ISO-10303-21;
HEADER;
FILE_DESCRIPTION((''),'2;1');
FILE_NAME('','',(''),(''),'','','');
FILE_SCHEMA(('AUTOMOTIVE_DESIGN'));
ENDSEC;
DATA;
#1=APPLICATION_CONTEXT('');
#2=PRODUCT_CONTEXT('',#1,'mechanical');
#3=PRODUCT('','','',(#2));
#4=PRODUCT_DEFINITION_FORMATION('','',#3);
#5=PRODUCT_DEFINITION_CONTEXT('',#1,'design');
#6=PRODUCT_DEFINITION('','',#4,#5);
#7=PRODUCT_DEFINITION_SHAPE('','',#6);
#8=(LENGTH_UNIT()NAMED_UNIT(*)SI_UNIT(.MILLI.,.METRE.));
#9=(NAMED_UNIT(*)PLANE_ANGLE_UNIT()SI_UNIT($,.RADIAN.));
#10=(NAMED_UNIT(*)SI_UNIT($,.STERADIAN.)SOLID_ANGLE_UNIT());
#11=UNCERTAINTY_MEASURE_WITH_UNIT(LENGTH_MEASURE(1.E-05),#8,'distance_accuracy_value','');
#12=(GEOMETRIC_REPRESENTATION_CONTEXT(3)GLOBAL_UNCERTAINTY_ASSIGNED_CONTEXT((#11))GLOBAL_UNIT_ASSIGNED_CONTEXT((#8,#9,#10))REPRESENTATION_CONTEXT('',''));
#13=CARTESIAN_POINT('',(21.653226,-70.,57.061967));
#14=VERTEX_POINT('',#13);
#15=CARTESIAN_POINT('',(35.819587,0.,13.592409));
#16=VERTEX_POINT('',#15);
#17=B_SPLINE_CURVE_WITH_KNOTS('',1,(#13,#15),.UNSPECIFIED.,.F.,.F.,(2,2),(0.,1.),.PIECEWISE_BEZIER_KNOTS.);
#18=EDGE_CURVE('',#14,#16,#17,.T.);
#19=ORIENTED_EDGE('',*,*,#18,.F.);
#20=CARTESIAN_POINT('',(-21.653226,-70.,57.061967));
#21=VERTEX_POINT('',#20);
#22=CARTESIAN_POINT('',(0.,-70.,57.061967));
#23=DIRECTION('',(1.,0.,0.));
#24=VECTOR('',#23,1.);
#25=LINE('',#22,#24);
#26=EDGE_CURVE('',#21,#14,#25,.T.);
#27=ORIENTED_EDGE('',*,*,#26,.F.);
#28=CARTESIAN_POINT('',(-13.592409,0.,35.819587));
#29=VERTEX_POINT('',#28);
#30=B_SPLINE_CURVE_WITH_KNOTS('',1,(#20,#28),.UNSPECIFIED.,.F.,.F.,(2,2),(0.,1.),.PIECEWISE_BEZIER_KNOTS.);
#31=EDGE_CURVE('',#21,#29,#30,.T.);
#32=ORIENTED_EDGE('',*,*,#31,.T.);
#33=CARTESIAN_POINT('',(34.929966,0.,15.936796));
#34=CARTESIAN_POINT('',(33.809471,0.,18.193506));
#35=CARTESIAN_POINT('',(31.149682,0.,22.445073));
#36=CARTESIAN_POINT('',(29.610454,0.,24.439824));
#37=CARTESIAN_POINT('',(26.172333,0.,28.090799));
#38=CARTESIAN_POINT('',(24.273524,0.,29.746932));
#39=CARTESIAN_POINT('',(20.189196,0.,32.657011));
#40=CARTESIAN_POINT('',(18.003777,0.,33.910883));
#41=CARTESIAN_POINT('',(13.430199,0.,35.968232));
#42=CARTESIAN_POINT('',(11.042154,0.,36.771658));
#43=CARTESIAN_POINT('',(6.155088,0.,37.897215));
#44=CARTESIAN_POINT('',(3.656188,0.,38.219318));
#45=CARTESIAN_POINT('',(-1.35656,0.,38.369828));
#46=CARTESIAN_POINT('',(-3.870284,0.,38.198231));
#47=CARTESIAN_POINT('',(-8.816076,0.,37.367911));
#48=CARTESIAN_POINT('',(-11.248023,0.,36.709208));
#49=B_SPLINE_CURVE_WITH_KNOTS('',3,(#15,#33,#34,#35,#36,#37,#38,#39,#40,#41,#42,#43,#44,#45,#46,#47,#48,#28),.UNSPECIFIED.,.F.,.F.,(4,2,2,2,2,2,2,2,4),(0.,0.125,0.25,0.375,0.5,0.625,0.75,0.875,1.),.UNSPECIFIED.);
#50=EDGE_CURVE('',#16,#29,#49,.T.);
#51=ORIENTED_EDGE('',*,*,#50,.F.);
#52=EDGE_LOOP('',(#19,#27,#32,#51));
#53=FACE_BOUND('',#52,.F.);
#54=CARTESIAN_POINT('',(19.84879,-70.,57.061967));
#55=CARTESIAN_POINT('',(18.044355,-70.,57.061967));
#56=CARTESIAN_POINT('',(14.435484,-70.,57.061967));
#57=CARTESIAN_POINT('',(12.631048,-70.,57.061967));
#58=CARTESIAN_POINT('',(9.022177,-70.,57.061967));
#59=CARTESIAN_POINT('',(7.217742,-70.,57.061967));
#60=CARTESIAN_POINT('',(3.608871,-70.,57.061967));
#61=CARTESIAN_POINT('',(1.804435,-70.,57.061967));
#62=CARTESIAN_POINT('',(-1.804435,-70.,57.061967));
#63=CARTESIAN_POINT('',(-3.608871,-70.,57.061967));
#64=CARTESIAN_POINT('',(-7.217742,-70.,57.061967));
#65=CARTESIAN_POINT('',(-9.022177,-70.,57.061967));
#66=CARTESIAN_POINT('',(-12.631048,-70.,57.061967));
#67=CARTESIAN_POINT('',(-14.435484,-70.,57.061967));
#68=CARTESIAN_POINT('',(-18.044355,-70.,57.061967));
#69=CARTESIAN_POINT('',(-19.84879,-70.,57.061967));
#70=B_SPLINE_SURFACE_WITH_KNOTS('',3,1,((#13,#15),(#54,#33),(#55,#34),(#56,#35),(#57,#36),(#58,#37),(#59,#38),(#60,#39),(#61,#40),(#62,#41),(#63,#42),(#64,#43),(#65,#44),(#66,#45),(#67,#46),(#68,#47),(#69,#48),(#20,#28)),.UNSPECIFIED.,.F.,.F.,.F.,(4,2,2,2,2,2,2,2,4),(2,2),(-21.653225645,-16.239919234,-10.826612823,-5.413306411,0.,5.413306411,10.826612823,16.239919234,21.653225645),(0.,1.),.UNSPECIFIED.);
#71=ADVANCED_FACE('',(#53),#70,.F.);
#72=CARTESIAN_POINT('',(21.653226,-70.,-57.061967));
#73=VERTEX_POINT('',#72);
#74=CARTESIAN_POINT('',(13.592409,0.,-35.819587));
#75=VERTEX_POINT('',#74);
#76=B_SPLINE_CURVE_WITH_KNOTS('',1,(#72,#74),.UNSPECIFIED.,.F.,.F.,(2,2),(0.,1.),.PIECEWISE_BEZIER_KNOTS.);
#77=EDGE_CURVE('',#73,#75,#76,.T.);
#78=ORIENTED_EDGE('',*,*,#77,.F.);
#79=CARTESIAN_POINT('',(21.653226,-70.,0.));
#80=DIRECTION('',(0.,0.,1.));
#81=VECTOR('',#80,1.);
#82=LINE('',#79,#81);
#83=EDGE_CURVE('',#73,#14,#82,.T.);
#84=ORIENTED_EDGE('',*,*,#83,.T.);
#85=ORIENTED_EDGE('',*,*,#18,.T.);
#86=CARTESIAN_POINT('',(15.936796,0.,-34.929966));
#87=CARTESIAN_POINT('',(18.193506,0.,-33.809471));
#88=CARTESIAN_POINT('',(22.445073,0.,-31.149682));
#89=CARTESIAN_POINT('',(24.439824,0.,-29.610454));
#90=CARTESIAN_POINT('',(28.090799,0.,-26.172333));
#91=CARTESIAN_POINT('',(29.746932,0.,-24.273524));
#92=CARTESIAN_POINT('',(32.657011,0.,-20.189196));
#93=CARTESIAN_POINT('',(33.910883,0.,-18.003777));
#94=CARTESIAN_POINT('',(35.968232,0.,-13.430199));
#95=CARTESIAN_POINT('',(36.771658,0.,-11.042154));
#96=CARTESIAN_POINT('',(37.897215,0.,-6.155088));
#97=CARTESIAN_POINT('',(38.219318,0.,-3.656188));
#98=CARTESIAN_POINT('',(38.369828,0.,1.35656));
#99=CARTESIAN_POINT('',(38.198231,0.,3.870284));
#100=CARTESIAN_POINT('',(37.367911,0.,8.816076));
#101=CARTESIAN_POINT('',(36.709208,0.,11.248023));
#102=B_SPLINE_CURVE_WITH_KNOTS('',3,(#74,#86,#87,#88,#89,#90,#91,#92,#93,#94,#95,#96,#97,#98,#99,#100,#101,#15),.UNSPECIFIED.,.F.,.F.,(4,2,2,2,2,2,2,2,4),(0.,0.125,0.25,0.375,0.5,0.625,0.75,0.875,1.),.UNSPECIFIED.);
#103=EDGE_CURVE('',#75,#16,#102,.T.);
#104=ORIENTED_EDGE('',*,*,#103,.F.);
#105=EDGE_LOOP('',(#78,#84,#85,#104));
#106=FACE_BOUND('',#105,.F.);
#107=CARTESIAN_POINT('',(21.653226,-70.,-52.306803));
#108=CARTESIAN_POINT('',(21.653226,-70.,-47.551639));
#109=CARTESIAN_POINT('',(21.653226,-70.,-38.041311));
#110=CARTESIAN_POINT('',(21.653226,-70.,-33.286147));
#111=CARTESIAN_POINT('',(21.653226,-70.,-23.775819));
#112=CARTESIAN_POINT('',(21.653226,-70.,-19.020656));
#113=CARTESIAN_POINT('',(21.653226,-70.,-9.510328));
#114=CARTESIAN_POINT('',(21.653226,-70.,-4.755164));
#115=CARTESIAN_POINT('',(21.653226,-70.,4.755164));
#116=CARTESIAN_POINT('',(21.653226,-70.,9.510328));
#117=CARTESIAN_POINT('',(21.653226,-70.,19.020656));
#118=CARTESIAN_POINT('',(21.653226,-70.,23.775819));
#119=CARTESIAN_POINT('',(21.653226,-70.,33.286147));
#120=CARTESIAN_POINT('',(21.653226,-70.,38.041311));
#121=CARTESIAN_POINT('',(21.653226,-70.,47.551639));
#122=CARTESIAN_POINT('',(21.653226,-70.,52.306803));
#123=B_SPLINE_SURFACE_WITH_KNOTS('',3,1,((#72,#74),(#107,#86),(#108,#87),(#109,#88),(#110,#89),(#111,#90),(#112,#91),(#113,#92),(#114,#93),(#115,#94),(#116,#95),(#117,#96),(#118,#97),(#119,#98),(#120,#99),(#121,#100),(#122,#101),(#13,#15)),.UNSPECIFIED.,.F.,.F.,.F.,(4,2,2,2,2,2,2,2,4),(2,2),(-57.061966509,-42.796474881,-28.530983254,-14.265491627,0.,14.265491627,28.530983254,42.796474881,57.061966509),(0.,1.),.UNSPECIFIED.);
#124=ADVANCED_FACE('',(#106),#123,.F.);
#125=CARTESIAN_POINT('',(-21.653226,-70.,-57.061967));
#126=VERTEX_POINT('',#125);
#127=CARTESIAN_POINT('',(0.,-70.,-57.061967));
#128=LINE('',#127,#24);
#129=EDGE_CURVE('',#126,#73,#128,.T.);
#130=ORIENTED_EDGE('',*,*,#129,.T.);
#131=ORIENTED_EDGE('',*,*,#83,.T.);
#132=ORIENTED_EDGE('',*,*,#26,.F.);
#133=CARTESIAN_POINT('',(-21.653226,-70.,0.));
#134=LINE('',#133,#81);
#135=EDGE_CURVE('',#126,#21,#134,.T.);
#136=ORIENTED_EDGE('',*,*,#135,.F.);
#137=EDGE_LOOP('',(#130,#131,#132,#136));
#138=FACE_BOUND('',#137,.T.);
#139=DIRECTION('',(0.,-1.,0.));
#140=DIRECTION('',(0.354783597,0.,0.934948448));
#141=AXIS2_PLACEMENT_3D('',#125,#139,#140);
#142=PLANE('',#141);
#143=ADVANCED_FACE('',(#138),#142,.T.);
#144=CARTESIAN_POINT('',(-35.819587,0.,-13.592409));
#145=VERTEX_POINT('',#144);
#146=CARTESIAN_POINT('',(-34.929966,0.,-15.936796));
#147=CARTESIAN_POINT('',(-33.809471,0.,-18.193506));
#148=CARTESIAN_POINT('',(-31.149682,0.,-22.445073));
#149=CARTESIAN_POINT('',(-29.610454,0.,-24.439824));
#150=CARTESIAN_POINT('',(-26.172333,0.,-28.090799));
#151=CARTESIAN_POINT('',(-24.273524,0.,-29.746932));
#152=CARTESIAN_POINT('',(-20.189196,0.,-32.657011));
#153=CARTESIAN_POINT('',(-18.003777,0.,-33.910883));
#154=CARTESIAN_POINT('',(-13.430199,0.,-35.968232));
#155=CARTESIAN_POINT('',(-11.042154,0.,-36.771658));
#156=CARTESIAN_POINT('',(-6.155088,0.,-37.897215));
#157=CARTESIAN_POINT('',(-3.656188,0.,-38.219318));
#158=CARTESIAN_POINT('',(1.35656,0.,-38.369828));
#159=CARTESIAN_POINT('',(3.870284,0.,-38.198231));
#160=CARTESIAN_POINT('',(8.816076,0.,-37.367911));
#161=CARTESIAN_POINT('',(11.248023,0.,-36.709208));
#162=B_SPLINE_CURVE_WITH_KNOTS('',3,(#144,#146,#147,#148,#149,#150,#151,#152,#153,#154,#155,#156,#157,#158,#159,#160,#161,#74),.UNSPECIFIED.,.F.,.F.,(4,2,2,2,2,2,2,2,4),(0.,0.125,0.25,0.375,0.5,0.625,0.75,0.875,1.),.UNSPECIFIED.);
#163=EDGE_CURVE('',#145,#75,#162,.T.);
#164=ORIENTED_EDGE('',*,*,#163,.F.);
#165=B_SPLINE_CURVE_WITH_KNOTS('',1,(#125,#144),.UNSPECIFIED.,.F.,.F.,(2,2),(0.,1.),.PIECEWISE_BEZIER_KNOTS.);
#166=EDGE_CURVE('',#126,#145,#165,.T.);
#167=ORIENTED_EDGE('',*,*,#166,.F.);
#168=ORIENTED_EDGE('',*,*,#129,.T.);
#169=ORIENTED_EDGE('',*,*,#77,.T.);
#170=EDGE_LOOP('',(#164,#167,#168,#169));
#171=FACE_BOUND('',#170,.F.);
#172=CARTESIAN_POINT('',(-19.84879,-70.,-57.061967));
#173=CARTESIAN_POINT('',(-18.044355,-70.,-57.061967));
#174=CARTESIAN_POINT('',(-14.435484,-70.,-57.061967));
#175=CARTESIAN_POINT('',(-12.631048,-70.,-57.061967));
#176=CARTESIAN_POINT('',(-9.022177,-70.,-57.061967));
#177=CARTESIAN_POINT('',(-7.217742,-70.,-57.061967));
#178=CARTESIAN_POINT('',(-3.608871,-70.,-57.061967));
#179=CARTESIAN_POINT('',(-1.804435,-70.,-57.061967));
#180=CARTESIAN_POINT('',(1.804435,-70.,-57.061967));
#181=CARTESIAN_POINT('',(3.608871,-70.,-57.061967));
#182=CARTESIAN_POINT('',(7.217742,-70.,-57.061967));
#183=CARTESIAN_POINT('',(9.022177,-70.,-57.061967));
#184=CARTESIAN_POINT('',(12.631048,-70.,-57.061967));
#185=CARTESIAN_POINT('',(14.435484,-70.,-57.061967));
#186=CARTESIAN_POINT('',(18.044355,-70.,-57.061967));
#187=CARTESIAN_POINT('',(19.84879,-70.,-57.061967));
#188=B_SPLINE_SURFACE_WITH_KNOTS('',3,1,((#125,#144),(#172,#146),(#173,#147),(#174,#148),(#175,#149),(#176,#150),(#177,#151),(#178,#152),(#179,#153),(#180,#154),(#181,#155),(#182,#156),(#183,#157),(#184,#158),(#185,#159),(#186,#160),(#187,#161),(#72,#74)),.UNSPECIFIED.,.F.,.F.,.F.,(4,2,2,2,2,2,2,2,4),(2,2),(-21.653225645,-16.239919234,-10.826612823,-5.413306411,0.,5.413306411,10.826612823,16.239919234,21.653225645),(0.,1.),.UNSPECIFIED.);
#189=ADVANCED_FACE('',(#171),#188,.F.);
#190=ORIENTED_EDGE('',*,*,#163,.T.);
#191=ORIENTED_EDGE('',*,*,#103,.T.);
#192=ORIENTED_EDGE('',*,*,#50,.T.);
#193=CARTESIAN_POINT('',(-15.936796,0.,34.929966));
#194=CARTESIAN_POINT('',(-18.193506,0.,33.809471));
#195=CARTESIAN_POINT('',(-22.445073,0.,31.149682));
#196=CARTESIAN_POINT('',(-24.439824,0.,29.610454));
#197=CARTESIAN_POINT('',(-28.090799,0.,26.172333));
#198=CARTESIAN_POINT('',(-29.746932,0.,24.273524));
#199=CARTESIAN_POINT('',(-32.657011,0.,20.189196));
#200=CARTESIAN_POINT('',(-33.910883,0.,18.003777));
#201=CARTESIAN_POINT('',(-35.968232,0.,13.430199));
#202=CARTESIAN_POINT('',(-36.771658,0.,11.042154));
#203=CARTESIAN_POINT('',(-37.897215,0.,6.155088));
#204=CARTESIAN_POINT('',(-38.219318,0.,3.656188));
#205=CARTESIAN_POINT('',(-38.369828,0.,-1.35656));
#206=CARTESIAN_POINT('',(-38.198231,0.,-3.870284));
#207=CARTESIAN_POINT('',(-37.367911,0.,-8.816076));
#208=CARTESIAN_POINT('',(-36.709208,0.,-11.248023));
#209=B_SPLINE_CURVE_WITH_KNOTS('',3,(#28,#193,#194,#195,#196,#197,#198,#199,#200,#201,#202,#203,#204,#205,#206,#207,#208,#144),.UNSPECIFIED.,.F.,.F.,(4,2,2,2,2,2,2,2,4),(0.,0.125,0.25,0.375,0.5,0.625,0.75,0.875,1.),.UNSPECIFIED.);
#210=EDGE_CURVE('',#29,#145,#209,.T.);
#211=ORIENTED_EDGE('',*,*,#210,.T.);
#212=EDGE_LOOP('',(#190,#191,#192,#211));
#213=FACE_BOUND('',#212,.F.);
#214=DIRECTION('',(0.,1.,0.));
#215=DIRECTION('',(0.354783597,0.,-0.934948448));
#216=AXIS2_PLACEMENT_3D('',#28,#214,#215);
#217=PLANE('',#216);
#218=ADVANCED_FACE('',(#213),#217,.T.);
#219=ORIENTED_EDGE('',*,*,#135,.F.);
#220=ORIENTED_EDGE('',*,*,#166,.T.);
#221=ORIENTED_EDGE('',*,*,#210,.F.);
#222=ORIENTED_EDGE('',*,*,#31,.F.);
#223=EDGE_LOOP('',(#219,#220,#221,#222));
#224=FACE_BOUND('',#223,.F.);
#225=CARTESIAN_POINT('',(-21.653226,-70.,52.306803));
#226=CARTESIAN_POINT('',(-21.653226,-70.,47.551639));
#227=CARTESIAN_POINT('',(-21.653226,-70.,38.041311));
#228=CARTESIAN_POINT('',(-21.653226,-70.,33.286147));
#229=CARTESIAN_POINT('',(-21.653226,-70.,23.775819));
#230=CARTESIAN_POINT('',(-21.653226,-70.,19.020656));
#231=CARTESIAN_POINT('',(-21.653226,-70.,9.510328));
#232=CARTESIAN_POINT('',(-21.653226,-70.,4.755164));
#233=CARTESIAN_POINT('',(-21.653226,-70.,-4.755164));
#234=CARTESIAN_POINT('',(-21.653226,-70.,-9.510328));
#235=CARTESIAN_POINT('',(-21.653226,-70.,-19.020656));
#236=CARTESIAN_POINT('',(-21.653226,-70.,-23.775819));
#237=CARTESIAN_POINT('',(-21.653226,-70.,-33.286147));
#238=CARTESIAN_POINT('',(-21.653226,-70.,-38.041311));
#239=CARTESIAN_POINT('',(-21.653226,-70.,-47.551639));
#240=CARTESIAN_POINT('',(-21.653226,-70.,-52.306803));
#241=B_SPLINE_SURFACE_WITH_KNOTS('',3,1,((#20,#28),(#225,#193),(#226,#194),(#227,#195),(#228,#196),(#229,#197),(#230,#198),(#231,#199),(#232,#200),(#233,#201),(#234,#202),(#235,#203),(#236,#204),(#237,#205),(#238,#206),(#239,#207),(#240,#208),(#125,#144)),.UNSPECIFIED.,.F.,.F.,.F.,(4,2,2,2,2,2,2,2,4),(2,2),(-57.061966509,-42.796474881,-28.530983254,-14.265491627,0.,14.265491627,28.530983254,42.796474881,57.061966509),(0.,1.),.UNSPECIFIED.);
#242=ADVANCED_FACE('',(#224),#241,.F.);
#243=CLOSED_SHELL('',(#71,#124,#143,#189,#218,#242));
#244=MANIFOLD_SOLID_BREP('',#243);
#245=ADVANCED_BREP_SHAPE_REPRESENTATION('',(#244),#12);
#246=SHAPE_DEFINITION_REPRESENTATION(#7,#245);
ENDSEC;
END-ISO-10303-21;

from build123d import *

# Parameters (mm, degrees)
F2_W = 43.3064512908
F2_H = 114.1239330173


# Not quite as in the source:
# - the arcs of a loft's sections are written as splines that run evenly, so that the points pair up as in the source's solid


with BuildPart() as f3:
    # F2 (on offset) → F3 section 0
    with BuildSketch(Plane.XZ.offset(70)):
        Rectangle(F2_W, F2_H)
    # F0 (on Front) → F3 section 1
    with BuildSketch(Plane.XZ):
        with BuildLine():
            add(Edge.make_bspline(
                [(-13.5924092476, 35.8195870657), (-15.9367957389, 34.9299659607), (-18.193506396, 33.8094706474), (-22.4450729848, 31.1496818467), (-24.439823788, 29.6104541278), (-28.0907986632, 26.1723329282), (-29.7469324577, 24.2735244618), (-32.6570107025, 20.1891959329), (-33.9108831954, 18.0037768635), (-35.9682321348, 13.4301994601), (-36.7716577093, 11.0421542169), (-37.8972145774, 6.1550879538), (-38.2193180393, 3.6561877763), (-38.3698283167, -1.3565601307), (-38.1982314106, -3.8702839101), (-37.3679110719, -8.8160763702), (-36.7092081706, -11.2480227564), (-35.8195870657, -13.5924092476)],
                knots=[0, 0, 0, 0, 0.125, 0.125, 0.25, 0.25, 0.375, 0.375, 0.5, 0.5, 0.625, 0.625, 0.75, 0.75, 0.875, 0.875, 1, 1, 1, 1], degree=3))
            add(Edge.make_bspline(
                [(-35.8195870657, -13.5924092476), (-34.9299659607, -15.9367957389), (-33.8094706474, -18.193506396), (-31.1496818467, -22.4450729848), (-29.6104541278, -24.439823788), (-26.1723329282, -28.0907986632), (-24.2735244618, -29.7469324577), (-20.1891959329, -32.6570107025), (-18.0037768635, -33.9108831954), (-13.4301994601, -35.9682321348), (-11.0421542169, -36.7716577093), (-6.1550879538, -37.8972145774), (-3.6561877763, -38.2193180393), (1.3565601307, -38.3698283167), (3.8702839101, -38.1982314106), (8.8160763702, -37.3679110719), (11.2480227564, -36.7092081706), (13.5924092476, -35.8195870657)],
                knots=[0, 0, 0, 0, 0.125, 0.125, 0.25, 0.25, 0.375, 0.375, 0.5, 0.5, 0.625, 0.625, 0.75, 0.75, 0.875, 0.875, 1, 1, 1, 1], degree=3))
            add(Edge.make_bspline(
                [(13.5924092476, -35.8195870657), (15.9367957389, -34.9299659607), (18.193506396, -33.8094706474), (22.4450729848, -31.1496818467), (24.439823788, -29.6104541278), (28.0907986632, -26.1723329282), (29.7469324577, -24.2735244618), (32.6570107025, -20.1891959329), (33.9108831954, -18.0037768635), (35.9682321348, -13.4301994601), (36.7716577093, -11.0421542169), (37.8972145774, -6.1550879538), (38.2193180393, -3.6561877763), (38.3698283167, 1.3565601307), (38.1982314106, 3.8702839101), (37.3679110719, 8.8160763702), (36.7092081706, 11.2480227564), (35.8195870657, 13.5924092476)],
                knots=[0, 0, 0, 0, 0.125, 0.125, 0.25, 0.25, 0.375, 0.375, 0.5, 0.5, 0.625, 0.625, 0.75, 0.75, 0.875, 0.875, 1, 1, 1, 1], degree=3))
            add(Edge.make_bspline(
                [(35.8195870657, 13.5924092476), (34.9299659607, 15.9367957389), (33.8094706474, 18.193506396), (31.1496818467, 22.4450729848), (29.6104541278, 24.439823788), (26.1723329282, 28.0907986632), (24.2735244618, 29.7469324577), (20.1891959329, 32.6570107025), (18.0037768635, 33.9108831954), (13.4301994601, 35.9682321348), (11.0421542169, 36.7716577093), (6.1550879538, 37.8972145774), (3.6561877763, 38.2193180393), (-1.3565601307, 38.3698283167), (-3.8702839101, 38.1982314106), (-8.8160763702, 37.3679110719), (-11.2480227564, 36.7092081706), (-13.5924092476, 35.8195870657)],
                knots=[0, 0, 0, 0, 0.125, 0.125, 0.25, 0.25, 0.375, 0.375, 0.5, 0.5, 0.625, 0.625, 0.75, 0.75, 0.875, 0.875, 1, 1, 1, 1], degree=3))
        make_face()
    loft(ruled=True)


solid = f3.part
